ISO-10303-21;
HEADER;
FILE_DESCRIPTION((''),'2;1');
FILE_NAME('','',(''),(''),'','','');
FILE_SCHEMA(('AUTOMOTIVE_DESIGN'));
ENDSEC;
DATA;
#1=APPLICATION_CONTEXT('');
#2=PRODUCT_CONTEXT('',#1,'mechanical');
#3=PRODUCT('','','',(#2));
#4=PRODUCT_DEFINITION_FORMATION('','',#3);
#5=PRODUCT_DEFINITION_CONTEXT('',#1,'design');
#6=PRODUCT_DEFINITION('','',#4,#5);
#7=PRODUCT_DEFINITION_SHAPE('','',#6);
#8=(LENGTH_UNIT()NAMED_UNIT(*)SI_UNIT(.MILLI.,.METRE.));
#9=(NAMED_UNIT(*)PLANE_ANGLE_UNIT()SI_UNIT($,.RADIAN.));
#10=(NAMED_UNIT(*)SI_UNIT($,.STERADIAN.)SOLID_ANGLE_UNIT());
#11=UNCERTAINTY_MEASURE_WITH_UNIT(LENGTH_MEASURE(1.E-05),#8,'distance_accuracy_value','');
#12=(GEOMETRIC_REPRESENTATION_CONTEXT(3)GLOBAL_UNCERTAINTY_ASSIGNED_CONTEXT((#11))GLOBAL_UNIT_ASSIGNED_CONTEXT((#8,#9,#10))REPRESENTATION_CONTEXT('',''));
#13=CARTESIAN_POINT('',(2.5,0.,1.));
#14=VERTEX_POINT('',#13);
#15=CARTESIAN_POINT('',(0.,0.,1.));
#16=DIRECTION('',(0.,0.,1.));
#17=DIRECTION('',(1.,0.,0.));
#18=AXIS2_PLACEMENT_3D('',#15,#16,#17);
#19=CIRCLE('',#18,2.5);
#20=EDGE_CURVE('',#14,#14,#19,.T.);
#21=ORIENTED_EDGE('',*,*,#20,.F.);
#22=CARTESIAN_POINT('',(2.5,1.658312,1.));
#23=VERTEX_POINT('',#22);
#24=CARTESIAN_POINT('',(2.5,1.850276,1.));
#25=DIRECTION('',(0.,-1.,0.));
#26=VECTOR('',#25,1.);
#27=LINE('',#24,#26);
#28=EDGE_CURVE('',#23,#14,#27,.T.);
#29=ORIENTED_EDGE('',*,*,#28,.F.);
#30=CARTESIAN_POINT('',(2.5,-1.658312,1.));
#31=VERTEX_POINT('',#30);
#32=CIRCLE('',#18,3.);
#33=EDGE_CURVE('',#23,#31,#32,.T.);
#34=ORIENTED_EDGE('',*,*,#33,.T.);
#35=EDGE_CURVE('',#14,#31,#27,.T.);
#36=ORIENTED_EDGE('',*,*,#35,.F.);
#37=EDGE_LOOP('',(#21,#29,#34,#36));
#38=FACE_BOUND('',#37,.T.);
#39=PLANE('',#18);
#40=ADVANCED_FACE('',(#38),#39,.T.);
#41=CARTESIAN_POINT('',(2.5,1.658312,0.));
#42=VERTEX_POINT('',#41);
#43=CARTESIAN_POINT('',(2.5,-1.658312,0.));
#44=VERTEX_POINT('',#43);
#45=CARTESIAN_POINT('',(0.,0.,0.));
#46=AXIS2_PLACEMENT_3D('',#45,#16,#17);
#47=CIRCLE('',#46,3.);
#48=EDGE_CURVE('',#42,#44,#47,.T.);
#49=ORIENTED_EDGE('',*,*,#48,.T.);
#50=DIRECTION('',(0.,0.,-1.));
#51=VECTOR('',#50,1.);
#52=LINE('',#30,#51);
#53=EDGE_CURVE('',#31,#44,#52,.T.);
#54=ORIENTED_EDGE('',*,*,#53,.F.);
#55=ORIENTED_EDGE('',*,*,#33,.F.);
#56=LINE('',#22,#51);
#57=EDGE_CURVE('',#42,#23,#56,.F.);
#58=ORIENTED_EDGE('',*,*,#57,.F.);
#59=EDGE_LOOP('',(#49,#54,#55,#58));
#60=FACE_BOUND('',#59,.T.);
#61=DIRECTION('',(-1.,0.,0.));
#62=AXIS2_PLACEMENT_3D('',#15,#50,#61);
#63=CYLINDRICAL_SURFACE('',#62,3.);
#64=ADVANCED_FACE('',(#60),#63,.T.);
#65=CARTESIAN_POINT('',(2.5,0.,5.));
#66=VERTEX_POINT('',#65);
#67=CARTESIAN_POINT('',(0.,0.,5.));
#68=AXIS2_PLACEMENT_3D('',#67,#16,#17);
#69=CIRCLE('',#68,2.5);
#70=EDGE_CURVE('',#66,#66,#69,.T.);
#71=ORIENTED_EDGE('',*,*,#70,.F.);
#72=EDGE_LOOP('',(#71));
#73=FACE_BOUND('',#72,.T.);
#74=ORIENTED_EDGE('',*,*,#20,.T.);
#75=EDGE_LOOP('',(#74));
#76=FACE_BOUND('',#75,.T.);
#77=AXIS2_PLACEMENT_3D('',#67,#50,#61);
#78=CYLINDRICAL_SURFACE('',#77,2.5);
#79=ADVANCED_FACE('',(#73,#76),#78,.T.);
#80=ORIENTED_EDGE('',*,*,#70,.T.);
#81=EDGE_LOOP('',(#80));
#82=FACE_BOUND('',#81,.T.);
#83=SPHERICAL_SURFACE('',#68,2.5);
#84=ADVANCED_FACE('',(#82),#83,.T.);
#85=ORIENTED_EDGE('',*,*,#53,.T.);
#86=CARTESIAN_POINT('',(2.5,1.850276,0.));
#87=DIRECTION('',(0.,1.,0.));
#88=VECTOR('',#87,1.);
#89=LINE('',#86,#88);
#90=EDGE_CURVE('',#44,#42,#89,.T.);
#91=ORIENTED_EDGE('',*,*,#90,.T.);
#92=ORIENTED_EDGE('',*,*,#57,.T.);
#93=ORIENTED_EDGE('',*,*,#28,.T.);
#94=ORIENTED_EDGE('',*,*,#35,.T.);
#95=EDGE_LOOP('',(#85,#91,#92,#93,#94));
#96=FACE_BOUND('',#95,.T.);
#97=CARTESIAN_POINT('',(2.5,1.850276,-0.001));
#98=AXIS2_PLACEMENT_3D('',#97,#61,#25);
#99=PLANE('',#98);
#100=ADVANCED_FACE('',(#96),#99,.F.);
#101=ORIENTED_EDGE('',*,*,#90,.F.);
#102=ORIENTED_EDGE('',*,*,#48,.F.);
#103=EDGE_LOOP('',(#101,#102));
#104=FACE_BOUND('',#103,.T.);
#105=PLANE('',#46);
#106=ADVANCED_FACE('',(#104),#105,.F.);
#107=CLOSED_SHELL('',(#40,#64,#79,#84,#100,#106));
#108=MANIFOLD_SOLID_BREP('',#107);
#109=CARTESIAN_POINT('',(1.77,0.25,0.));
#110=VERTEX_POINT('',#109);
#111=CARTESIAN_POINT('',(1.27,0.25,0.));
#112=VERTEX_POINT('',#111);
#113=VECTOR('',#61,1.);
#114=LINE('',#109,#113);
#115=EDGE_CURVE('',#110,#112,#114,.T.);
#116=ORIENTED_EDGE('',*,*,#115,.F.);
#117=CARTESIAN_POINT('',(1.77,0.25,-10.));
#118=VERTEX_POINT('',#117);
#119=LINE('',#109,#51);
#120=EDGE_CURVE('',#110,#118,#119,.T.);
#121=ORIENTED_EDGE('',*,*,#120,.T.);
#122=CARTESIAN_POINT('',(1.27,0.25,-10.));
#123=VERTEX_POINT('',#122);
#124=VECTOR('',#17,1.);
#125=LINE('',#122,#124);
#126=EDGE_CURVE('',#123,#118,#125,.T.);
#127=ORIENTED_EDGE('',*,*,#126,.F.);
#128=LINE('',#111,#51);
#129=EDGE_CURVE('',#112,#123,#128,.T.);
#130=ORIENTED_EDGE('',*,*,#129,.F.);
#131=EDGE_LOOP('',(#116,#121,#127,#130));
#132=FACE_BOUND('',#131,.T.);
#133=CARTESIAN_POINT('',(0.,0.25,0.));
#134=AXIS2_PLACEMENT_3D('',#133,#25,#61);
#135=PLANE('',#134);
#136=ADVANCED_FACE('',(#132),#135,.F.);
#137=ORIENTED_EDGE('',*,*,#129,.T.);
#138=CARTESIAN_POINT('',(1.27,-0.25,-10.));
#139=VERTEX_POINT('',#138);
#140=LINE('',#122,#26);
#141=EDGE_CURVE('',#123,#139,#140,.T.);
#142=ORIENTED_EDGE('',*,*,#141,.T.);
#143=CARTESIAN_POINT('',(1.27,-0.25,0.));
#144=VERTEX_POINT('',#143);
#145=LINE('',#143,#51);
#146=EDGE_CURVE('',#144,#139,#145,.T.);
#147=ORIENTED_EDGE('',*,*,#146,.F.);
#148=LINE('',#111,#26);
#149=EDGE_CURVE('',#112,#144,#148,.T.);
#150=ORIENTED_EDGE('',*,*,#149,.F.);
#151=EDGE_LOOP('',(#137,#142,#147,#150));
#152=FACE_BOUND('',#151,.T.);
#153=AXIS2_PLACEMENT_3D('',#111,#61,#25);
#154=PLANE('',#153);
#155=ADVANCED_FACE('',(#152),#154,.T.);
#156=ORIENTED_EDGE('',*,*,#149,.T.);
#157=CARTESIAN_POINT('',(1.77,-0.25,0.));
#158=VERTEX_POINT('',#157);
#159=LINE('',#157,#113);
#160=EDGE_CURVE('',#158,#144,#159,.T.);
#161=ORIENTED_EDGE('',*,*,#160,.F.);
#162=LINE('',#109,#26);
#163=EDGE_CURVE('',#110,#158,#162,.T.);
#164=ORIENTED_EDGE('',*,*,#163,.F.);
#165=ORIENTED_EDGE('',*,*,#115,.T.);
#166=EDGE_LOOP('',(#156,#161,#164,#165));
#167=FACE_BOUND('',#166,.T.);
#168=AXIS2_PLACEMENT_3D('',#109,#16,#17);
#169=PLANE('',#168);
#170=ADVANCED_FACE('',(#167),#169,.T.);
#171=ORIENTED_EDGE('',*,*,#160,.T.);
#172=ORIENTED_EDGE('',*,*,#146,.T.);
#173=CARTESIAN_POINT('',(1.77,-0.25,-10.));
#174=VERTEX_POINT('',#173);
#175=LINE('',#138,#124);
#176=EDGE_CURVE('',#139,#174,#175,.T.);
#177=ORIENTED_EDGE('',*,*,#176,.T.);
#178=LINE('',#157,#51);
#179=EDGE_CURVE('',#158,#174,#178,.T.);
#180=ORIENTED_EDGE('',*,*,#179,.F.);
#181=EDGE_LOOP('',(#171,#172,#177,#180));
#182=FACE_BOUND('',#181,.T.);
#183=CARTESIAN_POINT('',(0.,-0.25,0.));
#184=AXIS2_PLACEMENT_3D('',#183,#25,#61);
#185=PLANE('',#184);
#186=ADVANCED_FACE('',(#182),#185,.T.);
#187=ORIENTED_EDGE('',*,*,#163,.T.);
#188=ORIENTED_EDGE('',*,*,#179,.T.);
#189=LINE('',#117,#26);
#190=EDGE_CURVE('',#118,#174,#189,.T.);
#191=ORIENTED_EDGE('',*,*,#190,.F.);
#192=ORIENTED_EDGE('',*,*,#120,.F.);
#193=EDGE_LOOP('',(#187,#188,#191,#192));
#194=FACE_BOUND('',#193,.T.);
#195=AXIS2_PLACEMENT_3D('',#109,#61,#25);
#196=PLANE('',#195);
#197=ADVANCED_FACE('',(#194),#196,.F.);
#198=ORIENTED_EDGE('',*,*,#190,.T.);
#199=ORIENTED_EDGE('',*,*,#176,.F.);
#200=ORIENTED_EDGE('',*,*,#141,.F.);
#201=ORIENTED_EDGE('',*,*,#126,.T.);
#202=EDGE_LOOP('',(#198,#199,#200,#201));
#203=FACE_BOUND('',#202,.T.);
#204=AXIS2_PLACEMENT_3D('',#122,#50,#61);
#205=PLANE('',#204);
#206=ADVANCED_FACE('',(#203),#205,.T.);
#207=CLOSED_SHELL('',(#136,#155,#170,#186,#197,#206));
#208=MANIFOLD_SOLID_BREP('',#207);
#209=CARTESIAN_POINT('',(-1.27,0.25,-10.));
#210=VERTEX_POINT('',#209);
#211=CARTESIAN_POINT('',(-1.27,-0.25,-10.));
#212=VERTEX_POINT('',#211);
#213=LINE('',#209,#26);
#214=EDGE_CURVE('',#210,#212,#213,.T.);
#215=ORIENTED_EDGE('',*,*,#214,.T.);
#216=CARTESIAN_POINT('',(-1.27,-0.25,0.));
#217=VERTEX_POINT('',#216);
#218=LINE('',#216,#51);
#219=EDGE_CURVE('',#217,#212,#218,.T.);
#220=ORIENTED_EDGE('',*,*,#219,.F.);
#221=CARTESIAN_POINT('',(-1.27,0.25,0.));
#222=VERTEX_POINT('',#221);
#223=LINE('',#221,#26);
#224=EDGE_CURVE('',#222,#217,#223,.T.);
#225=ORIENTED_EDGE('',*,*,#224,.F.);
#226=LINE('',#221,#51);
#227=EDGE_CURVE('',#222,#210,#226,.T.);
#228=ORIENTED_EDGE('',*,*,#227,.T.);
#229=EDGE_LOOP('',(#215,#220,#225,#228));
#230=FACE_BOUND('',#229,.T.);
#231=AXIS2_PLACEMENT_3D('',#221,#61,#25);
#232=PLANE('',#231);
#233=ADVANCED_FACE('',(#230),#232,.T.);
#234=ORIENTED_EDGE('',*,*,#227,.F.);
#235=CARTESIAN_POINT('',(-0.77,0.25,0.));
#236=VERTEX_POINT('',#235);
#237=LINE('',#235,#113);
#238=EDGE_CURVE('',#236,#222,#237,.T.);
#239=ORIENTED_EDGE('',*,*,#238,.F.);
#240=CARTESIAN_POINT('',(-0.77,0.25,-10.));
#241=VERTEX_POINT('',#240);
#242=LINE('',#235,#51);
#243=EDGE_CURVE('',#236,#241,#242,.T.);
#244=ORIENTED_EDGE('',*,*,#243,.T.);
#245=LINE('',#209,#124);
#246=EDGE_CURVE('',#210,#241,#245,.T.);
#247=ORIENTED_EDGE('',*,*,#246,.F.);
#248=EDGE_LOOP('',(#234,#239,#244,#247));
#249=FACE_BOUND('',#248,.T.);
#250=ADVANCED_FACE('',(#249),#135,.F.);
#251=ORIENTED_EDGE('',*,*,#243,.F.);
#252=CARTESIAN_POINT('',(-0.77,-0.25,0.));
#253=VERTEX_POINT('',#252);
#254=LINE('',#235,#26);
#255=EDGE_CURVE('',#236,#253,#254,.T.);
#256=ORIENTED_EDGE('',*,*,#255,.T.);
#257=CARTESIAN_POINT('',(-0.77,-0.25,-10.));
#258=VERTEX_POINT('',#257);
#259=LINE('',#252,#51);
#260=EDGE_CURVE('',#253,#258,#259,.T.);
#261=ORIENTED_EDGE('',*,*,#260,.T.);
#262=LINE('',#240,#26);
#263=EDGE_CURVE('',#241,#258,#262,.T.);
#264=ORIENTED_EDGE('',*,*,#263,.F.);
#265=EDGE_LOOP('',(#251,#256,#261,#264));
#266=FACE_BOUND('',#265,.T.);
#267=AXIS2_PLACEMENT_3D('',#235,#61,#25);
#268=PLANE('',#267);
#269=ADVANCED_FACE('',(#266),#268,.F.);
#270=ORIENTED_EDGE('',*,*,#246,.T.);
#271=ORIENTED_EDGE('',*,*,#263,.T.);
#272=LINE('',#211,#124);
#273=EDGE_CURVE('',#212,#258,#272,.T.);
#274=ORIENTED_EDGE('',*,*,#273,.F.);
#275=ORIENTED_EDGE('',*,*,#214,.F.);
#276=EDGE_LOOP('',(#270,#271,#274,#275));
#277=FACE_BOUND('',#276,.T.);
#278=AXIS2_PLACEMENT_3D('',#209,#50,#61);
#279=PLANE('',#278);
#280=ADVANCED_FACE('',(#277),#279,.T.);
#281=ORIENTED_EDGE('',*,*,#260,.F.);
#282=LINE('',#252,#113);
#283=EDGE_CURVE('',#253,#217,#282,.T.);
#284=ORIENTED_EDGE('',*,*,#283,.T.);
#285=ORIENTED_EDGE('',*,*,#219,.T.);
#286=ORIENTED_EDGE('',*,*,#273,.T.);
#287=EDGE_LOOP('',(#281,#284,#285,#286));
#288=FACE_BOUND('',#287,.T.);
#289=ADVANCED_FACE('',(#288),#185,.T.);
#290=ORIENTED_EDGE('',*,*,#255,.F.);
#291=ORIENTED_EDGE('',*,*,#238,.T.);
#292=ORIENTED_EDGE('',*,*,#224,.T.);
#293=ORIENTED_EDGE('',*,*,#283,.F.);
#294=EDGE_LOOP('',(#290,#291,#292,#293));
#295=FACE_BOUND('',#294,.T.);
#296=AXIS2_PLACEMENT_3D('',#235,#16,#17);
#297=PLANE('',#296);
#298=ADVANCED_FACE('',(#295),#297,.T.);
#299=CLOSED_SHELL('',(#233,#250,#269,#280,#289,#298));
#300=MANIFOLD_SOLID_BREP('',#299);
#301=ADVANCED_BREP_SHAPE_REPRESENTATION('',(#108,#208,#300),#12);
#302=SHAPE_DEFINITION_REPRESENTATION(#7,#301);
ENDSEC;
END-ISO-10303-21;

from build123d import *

# Parameters (mm, degrees)
SKETCH1_R           = 3
BOSS_EXTRUDE1_DEPTH = 1
SKETCH2_R           = 2.5
BOSS_EXTRUDE2_DEPTH = 4
DOME1_FACE_RADIUS   = 2.5
DOME1_HEIGHT        = 2.5
CUT_EXTRUDE1_REACH  = 9.762
SKETCH3_W           = 0.5
SKETCH3_H           = 4.031292186
SKETCH8_W           = 0.5
SKETCH8_H           = 10
BASE_FLANGE1_DEPTH  = 0.25
SKETCH9_W           = 0.5
SKETCH9_H           = 10
BASE_FLANGE2_DEPTH  = 0.25


# Sheet-metal steps are written as plain solids
with BuildPart() as part:
    # Sketch1 → Boss-Extrude1 (new body)
    with BuildSketch(Plane.XY):
        Circle(SKETCH1_R)
    extrude(amount=BOSS_EXTRUDE1_DEPTH)

    # Sketch2 → Boss-Extrude2 (add)
    with BuildSketch(Plane.XY.offset(1)):
        Circle(SKETCH2_R)
    extrude(amount=BOSS_EXTRUDE2_DEPTH)

    # Dome1: a dome of height H over a round flat face of radius A is a cap of a sphere of radius (A * A + H * H) / (2 * H)
    dome1_r = (DOME1_FACE_RADIUS * DOME1_FACE_RADIUS + DOME1_HEIGHT * DOME1_HEIGHT) / (2 * DOME1_HEIGHT)
    dome1_base = Plane((0, 0, 5), z_dir=(0, 0, 1))
    with Locations(dome1_base.offset(DOME1_HEIGHT - dome1_r)):
        dome1_ball = Sphere(dome1_r, mode=Mode.PRIVATE)
    add(split(dome1_ball, bisect_by=dome1_base, keep=Keep.TOP, mode=Mode.PRIVATE))

    # Sketch3 → Cut-Extrude1 (cut, up to next)
    with BuildSketch(Plane.XY.offset(1), mode=Mode.PRIVATE) as cut_extrude1_sk1:
        with Locations((2.75, -0.165370345)):
            Rectangle(SKETCH3_W, SKETCH3_H)
    cut_extrude1_tool1 = extrude(cut_extrude1_sk1.sketch, amount=-CUT_EXTRUDE1_REACH, mode=Mode.PRIVATE) & part.part
    add(cut_extrude1_tool1.solids().sort_by_distance((2.75, -0.16537, 1))[0], mode=Mode.SUBTRACT)


with BuildPart() as body_2:
    # Sketch8 → Base-Flange1 (new, symmetric)
    with BuildSketch(Plane(origin=(0, 0, 0), x_dir=(1, 0, 0), z_dir=(0, 1, 0))):
        with Locations((-1.02, 5)):
            Rectangle(SKETCH8_W, SKETCH8_H)
    extrude(amount=BASE_FLANGE1_DEPTH, both=True)


with BuildPart() as body_3:
    # Sketch9 → Base-Flange2 (new, symmetric)
    with BuildSketch(Plane(origin=(0, 0, 0), x_dir=(1, 0, 0), z_dir=(0, 1, 0))):
        with Locations((1.52, 5)):
            Rectangle(SKETCH9_W, SKETCH9_H)
    extrude(amount=BASE_FLANGE2_DEPTH, both=True)


solid = Compound([part.part, body_2.part, body_3.part])
